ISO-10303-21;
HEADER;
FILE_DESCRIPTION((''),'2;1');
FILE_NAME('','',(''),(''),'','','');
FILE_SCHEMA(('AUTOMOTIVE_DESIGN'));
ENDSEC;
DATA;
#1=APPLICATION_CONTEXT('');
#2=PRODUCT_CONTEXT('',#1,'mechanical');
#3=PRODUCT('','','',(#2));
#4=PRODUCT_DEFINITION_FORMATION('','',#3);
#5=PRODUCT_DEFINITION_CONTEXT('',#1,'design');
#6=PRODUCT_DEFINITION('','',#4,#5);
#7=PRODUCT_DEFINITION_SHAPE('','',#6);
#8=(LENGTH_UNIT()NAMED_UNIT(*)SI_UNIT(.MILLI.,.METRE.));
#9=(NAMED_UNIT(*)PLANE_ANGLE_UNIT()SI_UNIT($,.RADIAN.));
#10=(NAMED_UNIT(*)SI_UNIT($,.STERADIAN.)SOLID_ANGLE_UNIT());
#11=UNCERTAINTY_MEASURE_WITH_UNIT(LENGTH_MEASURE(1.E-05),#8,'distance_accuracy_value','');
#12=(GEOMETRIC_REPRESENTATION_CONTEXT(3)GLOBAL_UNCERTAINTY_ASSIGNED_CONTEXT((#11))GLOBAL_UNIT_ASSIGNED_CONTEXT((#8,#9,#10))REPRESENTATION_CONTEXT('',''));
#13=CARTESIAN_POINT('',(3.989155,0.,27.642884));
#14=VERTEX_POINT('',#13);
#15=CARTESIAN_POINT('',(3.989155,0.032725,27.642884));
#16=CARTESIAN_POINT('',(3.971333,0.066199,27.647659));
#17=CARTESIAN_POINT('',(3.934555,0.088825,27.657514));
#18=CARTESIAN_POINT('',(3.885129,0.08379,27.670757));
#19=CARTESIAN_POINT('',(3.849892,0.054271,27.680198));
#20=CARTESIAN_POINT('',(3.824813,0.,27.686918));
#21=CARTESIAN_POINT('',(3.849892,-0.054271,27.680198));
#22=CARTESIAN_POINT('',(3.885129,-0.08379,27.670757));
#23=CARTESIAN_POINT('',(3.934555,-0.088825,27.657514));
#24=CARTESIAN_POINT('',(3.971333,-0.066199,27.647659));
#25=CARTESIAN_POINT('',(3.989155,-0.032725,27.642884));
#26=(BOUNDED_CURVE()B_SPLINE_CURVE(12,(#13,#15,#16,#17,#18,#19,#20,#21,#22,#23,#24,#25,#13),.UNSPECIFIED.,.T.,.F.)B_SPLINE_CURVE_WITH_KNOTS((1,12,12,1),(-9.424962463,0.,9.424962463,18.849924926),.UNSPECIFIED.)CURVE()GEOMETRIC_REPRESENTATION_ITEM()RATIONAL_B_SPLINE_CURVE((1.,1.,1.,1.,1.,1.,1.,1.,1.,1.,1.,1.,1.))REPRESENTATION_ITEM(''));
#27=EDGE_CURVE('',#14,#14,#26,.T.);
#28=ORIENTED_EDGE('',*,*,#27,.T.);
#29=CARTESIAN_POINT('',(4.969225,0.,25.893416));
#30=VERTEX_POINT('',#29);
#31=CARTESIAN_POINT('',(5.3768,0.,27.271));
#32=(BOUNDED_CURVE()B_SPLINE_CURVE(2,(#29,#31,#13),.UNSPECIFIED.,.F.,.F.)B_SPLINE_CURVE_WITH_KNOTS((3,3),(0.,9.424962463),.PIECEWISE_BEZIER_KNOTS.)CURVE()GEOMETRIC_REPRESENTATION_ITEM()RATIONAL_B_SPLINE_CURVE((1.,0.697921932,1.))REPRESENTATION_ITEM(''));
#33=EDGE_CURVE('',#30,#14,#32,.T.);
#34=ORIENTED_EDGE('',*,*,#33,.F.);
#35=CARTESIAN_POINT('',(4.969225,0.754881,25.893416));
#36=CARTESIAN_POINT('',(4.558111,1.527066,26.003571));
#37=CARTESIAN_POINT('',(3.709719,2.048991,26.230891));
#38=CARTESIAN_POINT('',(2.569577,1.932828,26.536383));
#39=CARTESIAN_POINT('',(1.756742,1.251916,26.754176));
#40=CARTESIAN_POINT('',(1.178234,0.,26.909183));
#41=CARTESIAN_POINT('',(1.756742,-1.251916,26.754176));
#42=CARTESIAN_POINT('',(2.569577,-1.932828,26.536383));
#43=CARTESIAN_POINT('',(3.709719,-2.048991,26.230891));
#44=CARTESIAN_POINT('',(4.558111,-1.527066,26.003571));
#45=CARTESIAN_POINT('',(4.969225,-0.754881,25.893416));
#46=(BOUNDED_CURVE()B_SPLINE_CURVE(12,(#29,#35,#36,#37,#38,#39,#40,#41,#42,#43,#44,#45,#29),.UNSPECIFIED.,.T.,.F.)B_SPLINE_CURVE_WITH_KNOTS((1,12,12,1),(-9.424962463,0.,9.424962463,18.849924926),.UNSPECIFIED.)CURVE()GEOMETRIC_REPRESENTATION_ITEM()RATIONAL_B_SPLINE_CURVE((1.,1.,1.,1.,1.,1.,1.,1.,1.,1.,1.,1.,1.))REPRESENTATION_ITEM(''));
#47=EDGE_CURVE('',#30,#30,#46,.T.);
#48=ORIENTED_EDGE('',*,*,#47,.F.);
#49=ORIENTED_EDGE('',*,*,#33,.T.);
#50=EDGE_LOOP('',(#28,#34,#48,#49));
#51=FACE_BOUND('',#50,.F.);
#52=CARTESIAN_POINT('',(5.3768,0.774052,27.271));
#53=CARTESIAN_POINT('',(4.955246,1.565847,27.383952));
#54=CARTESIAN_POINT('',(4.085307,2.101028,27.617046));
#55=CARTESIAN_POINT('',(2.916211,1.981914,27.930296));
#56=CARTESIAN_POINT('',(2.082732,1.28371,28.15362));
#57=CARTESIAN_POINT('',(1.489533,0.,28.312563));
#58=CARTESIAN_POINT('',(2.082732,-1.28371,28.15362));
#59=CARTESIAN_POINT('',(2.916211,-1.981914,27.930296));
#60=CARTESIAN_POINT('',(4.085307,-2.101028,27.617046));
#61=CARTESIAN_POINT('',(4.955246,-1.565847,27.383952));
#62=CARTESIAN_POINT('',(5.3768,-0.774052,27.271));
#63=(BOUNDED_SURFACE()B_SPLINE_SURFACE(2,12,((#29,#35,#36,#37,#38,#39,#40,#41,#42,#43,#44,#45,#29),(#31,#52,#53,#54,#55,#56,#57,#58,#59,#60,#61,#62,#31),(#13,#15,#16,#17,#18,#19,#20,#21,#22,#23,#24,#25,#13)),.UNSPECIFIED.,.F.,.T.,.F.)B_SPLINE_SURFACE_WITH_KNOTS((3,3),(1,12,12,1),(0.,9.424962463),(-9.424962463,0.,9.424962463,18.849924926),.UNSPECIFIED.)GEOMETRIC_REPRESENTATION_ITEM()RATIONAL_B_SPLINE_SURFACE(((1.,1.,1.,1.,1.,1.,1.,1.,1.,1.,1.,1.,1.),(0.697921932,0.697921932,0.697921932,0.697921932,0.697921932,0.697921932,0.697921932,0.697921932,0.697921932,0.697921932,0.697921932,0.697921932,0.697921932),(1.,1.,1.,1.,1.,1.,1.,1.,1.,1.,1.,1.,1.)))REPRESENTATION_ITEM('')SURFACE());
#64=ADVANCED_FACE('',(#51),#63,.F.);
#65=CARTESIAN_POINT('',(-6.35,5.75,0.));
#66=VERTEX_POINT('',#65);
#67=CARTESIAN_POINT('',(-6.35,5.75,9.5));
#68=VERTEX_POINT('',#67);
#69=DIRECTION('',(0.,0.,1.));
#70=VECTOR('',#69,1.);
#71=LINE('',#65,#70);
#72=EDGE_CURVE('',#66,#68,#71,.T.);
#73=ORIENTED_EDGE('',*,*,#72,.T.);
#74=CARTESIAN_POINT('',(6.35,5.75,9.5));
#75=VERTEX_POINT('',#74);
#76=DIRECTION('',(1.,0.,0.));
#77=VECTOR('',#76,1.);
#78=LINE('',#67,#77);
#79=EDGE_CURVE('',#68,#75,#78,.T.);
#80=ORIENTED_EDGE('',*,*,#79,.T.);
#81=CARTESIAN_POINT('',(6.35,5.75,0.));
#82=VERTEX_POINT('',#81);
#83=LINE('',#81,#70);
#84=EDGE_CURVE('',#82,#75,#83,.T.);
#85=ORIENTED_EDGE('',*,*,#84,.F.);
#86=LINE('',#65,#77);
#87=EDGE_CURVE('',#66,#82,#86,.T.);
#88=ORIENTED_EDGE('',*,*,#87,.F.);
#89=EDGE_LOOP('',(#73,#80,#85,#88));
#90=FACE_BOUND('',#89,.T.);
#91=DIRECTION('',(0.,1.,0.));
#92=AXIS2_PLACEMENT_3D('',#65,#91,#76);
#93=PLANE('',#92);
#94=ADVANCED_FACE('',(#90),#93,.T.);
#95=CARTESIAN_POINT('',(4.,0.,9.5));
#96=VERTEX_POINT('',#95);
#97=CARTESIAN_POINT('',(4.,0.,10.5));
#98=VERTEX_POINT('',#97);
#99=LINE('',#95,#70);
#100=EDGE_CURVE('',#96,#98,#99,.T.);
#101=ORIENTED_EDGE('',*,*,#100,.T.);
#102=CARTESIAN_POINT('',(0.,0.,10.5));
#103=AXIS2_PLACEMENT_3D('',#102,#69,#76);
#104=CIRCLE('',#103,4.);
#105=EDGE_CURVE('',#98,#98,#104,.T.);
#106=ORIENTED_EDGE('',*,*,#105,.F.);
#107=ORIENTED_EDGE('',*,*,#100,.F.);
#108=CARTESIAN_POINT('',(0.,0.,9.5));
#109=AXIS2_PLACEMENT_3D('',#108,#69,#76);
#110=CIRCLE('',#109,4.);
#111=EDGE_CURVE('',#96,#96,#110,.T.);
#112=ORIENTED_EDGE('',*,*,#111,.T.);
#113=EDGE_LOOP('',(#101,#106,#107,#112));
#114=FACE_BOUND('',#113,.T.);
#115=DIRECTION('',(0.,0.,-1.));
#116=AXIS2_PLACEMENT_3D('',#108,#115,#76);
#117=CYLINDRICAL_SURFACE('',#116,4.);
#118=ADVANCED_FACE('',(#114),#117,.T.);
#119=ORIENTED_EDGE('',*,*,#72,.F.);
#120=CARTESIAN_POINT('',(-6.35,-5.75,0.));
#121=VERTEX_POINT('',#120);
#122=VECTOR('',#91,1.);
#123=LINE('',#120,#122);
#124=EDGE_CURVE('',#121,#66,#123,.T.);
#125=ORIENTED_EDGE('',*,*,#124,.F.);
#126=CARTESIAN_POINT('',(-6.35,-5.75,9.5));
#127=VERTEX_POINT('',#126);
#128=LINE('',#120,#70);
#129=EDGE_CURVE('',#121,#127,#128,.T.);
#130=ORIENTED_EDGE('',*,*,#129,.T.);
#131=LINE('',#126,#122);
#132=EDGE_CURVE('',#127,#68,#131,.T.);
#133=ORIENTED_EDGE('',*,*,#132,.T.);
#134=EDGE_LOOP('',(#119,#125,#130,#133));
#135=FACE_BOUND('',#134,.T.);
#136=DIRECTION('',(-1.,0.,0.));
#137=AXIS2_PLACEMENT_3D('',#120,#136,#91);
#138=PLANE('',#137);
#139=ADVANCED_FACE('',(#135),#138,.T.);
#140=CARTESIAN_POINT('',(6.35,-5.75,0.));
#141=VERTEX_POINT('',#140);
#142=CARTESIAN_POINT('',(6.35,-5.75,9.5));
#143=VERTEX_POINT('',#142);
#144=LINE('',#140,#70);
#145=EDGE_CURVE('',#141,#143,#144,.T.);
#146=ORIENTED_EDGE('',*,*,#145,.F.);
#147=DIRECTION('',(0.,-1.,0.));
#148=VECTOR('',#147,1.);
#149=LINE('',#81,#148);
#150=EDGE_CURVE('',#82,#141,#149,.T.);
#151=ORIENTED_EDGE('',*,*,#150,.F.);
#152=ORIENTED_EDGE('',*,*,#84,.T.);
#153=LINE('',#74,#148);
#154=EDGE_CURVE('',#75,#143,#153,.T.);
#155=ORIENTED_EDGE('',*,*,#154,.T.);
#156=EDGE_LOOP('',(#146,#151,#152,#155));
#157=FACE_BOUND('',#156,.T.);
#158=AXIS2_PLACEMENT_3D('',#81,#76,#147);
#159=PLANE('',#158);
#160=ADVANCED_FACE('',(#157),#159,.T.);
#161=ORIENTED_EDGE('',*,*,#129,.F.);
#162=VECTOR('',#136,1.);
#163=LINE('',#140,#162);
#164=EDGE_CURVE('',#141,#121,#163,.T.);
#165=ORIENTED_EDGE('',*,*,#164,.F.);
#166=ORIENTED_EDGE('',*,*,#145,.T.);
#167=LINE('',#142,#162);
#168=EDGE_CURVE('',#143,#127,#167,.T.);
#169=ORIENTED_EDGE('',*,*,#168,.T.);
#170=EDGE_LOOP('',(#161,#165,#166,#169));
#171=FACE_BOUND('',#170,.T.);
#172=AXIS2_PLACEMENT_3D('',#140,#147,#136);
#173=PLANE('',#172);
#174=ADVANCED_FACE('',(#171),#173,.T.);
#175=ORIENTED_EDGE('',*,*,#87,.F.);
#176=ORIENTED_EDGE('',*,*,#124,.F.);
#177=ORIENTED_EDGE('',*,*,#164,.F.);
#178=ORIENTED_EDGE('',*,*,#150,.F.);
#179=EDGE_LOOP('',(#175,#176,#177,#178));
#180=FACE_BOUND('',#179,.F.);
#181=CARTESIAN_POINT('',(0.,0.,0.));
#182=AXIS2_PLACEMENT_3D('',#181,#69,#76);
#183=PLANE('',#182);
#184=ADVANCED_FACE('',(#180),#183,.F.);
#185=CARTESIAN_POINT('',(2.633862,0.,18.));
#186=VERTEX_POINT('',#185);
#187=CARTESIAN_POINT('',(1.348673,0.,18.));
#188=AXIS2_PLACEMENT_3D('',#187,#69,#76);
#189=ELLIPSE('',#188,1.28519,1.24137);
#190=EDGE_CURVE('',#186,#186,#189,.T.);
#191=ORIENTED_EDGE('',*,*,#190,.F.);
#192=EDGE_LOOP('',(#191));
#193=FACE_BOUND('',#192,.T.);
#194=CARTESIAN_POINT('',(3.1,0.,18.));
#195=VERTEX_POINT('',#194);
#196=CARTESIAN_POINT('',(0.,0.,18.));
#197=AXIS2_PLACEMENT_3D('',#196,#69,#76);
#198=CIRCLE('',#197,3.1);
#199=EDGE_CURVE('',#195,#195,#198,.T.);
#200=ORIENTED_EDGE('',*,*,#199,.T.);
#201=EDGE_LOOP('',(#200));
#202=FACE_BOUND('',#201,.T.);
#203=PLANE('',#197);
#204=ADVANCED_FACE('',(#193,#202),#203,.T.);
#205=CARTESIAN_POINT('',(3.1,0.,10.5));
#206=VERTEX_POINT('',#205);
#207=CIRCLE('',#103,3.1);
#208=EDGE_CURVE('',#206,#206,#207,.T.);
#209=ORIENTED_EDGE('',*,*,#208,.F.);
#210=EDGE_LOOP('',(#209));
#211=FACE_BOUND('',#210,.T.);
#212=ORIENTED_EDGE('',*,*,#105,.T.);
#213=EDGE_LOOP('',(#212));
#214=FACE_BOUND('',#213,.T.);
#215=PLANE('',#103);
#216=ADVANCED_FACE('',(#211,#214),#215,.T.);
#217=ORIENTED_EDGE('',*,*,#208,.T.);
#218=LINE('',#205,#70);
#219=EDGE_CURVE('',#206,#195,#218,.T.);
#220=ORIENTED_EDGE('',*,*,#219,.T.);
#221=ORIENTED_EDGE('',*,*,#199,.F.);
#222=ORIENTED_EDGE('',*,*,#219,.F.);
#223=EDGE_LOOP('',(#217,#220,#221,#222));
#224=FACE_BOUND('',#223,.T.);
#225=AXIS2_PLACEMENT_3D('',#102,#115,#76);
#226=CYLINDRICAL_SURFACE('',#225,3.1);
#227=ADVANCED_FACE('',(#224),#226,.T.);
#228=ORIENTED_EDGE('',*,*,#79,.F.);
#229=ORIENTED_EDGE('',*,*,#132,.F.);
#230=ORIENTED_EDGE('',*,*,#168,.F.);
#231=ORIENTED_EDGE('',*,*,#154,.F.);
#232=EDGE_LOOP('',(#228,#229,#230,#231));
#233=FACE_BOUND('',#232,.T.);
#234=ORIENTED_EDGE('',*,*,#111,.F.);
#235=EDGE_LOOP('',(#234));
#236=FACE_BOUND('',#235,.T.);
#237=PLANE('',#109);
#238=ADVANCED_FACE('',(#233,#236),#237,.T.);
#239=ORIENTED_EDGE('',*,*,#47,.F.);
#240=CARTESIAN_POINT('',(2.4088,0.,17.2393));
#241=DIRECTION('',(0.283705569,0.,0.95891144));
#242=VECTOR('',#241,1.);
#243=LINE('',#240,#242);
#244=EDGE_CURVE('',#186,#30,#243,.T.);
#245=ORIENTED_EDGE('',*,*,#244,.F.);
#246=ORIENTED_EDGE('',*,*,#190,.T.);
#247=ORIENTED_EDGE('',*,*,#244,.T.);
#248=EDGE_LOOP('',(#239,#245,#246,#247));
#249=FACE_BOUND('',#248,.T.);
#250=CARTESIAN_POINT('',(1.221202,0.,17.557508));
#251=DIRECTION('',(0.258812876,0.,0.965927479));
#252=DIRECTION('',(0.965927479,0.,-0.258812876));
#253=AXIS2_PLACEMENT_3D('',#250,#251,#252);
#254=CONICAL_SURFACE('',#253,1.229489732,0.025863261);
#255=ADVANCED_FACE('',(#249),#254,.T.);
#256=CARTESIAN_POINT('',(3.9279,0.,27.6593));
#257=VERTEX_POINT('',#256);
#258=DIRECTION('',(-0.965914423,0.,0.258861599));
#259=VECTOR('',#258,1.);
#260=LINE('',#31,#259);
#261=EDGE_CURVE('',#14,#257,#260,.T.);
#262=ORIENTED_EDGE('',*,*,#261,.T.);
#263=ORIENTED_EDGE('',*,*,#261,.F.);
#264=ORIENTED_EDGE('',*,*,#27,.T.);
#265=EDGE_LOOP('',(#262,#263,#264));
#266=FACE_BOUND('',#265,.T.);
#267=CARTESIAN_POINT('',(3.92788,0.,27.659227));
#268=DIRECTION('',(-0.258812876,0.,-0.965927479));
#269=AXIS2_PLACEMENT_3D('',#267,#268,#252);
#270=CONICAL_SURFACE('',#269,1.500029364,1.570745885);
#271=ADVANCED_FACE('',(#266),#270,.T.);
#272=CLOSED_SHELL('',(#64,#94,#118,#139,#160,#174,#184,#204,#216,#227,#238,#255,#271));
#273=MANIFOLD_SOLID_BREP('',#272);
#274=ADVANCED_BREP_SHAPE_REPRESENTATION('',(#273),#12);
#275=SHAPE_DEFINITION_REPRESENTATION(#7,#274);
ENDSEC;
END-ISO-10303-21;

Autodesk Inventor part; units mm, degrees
ref_plane "YZ Plane" through (0, 0, 0) normal (1, 0, 0) x (0, 1, 0)
ref_plane "XZ Plane" through (0, 0, 0) normal (0, 1, 0) x (-1, 0, 0)
ref_plane "XY Plane" through (0, 0, 0) normal (0, 0, 1) x (1, 0, 0)
sketch "Sketch1" plane through (0, 0, 0) normal (0, 0, 1) x (1, 0, 0)
  line L0 (-8.89, 0) -> (8.89, 0) construction
  line L1 (0, -8.05) -> (0, 8.05) construction
  line L2 (-6.35, 5.75) -> (6.35, 5.75)
  line L3 (6.35, 5.75) -> (6.35, -5.75)
  line L4 (6.35, -5.75) -> (-6.35, -5.75)
  line L5 (-6.35, -5.75) -> (-6.35, 5.75)
  point P0 (0, 0)
  point P1 (0, 5.75)
  point P2 (6.35, 0)
  dimension "d0" = 12.7
  dimension "d1" = 11.5
extrude "Extrusion1" add sketch "Sketch1" along normal blind 9.5
sketch "Sketch2" plane through (0, 0, 9.5) normal (0, 0, 1) x (1, 0, 0)
  circle A0 centre (0, 0) radius 4
  dimension "d4" = 8
extrude "Extrusion2" add sketch "Sketch2" along normal blind 1
sketch "Sketch3" plane through (0, 0, 10.5) normal (0, 0, 1) x (1, 0, 0)
  circle A0 centre (0, 0) radius 3.1
  dimension "d7" = 6.2
extrude "Extrusion3" add sketch "Sketch3" along normal blind 7.5
sketch "Sketch4" plane through (0, 0, 0) normal (0, 1, 0) x (-1, 0, 0)
  line L0 (8.89, 0) -> (-8.89, 0) construction
  line L1 (0, -3.6) -> (0, 21.6) construction
  line L2 (0, 13) -> (-4.5899, 30.1296) construction
  line L3 (3.1, 18) -> (-3.1, 18) construction
  line L4 (-1.2212, 17.5575) -> (-2.4088, 17.2393)
  line L5 (-2.4088, 17.2393) -> (-5.3768, 27.271)
  line L6 (-5.3768, 27.271) -> (-3.9279, 27.6593)
  line L7 (-3.9279, 27.6593) -> (-1.2212, 17.5575)
  point P0 (0, 0)
  point P1 (-1.3397, 18)
  point P2 (-2.6338, 18)
  dimension "d10" = 15
  dimension "d11" = 5
  dimension "d13" = 10
  dimension "d14" = 3
  dimension "d16" = 2.5
revolve "Revolution1" add sketch "Sketch4" angle 360 about axis through (0, 0, 13) along (0.258819, 0, 0.9659258)
fillet "Fillet1" radius 1.4 1 edges at (2.479, 0, 28.0475)
properties part number "F112"
